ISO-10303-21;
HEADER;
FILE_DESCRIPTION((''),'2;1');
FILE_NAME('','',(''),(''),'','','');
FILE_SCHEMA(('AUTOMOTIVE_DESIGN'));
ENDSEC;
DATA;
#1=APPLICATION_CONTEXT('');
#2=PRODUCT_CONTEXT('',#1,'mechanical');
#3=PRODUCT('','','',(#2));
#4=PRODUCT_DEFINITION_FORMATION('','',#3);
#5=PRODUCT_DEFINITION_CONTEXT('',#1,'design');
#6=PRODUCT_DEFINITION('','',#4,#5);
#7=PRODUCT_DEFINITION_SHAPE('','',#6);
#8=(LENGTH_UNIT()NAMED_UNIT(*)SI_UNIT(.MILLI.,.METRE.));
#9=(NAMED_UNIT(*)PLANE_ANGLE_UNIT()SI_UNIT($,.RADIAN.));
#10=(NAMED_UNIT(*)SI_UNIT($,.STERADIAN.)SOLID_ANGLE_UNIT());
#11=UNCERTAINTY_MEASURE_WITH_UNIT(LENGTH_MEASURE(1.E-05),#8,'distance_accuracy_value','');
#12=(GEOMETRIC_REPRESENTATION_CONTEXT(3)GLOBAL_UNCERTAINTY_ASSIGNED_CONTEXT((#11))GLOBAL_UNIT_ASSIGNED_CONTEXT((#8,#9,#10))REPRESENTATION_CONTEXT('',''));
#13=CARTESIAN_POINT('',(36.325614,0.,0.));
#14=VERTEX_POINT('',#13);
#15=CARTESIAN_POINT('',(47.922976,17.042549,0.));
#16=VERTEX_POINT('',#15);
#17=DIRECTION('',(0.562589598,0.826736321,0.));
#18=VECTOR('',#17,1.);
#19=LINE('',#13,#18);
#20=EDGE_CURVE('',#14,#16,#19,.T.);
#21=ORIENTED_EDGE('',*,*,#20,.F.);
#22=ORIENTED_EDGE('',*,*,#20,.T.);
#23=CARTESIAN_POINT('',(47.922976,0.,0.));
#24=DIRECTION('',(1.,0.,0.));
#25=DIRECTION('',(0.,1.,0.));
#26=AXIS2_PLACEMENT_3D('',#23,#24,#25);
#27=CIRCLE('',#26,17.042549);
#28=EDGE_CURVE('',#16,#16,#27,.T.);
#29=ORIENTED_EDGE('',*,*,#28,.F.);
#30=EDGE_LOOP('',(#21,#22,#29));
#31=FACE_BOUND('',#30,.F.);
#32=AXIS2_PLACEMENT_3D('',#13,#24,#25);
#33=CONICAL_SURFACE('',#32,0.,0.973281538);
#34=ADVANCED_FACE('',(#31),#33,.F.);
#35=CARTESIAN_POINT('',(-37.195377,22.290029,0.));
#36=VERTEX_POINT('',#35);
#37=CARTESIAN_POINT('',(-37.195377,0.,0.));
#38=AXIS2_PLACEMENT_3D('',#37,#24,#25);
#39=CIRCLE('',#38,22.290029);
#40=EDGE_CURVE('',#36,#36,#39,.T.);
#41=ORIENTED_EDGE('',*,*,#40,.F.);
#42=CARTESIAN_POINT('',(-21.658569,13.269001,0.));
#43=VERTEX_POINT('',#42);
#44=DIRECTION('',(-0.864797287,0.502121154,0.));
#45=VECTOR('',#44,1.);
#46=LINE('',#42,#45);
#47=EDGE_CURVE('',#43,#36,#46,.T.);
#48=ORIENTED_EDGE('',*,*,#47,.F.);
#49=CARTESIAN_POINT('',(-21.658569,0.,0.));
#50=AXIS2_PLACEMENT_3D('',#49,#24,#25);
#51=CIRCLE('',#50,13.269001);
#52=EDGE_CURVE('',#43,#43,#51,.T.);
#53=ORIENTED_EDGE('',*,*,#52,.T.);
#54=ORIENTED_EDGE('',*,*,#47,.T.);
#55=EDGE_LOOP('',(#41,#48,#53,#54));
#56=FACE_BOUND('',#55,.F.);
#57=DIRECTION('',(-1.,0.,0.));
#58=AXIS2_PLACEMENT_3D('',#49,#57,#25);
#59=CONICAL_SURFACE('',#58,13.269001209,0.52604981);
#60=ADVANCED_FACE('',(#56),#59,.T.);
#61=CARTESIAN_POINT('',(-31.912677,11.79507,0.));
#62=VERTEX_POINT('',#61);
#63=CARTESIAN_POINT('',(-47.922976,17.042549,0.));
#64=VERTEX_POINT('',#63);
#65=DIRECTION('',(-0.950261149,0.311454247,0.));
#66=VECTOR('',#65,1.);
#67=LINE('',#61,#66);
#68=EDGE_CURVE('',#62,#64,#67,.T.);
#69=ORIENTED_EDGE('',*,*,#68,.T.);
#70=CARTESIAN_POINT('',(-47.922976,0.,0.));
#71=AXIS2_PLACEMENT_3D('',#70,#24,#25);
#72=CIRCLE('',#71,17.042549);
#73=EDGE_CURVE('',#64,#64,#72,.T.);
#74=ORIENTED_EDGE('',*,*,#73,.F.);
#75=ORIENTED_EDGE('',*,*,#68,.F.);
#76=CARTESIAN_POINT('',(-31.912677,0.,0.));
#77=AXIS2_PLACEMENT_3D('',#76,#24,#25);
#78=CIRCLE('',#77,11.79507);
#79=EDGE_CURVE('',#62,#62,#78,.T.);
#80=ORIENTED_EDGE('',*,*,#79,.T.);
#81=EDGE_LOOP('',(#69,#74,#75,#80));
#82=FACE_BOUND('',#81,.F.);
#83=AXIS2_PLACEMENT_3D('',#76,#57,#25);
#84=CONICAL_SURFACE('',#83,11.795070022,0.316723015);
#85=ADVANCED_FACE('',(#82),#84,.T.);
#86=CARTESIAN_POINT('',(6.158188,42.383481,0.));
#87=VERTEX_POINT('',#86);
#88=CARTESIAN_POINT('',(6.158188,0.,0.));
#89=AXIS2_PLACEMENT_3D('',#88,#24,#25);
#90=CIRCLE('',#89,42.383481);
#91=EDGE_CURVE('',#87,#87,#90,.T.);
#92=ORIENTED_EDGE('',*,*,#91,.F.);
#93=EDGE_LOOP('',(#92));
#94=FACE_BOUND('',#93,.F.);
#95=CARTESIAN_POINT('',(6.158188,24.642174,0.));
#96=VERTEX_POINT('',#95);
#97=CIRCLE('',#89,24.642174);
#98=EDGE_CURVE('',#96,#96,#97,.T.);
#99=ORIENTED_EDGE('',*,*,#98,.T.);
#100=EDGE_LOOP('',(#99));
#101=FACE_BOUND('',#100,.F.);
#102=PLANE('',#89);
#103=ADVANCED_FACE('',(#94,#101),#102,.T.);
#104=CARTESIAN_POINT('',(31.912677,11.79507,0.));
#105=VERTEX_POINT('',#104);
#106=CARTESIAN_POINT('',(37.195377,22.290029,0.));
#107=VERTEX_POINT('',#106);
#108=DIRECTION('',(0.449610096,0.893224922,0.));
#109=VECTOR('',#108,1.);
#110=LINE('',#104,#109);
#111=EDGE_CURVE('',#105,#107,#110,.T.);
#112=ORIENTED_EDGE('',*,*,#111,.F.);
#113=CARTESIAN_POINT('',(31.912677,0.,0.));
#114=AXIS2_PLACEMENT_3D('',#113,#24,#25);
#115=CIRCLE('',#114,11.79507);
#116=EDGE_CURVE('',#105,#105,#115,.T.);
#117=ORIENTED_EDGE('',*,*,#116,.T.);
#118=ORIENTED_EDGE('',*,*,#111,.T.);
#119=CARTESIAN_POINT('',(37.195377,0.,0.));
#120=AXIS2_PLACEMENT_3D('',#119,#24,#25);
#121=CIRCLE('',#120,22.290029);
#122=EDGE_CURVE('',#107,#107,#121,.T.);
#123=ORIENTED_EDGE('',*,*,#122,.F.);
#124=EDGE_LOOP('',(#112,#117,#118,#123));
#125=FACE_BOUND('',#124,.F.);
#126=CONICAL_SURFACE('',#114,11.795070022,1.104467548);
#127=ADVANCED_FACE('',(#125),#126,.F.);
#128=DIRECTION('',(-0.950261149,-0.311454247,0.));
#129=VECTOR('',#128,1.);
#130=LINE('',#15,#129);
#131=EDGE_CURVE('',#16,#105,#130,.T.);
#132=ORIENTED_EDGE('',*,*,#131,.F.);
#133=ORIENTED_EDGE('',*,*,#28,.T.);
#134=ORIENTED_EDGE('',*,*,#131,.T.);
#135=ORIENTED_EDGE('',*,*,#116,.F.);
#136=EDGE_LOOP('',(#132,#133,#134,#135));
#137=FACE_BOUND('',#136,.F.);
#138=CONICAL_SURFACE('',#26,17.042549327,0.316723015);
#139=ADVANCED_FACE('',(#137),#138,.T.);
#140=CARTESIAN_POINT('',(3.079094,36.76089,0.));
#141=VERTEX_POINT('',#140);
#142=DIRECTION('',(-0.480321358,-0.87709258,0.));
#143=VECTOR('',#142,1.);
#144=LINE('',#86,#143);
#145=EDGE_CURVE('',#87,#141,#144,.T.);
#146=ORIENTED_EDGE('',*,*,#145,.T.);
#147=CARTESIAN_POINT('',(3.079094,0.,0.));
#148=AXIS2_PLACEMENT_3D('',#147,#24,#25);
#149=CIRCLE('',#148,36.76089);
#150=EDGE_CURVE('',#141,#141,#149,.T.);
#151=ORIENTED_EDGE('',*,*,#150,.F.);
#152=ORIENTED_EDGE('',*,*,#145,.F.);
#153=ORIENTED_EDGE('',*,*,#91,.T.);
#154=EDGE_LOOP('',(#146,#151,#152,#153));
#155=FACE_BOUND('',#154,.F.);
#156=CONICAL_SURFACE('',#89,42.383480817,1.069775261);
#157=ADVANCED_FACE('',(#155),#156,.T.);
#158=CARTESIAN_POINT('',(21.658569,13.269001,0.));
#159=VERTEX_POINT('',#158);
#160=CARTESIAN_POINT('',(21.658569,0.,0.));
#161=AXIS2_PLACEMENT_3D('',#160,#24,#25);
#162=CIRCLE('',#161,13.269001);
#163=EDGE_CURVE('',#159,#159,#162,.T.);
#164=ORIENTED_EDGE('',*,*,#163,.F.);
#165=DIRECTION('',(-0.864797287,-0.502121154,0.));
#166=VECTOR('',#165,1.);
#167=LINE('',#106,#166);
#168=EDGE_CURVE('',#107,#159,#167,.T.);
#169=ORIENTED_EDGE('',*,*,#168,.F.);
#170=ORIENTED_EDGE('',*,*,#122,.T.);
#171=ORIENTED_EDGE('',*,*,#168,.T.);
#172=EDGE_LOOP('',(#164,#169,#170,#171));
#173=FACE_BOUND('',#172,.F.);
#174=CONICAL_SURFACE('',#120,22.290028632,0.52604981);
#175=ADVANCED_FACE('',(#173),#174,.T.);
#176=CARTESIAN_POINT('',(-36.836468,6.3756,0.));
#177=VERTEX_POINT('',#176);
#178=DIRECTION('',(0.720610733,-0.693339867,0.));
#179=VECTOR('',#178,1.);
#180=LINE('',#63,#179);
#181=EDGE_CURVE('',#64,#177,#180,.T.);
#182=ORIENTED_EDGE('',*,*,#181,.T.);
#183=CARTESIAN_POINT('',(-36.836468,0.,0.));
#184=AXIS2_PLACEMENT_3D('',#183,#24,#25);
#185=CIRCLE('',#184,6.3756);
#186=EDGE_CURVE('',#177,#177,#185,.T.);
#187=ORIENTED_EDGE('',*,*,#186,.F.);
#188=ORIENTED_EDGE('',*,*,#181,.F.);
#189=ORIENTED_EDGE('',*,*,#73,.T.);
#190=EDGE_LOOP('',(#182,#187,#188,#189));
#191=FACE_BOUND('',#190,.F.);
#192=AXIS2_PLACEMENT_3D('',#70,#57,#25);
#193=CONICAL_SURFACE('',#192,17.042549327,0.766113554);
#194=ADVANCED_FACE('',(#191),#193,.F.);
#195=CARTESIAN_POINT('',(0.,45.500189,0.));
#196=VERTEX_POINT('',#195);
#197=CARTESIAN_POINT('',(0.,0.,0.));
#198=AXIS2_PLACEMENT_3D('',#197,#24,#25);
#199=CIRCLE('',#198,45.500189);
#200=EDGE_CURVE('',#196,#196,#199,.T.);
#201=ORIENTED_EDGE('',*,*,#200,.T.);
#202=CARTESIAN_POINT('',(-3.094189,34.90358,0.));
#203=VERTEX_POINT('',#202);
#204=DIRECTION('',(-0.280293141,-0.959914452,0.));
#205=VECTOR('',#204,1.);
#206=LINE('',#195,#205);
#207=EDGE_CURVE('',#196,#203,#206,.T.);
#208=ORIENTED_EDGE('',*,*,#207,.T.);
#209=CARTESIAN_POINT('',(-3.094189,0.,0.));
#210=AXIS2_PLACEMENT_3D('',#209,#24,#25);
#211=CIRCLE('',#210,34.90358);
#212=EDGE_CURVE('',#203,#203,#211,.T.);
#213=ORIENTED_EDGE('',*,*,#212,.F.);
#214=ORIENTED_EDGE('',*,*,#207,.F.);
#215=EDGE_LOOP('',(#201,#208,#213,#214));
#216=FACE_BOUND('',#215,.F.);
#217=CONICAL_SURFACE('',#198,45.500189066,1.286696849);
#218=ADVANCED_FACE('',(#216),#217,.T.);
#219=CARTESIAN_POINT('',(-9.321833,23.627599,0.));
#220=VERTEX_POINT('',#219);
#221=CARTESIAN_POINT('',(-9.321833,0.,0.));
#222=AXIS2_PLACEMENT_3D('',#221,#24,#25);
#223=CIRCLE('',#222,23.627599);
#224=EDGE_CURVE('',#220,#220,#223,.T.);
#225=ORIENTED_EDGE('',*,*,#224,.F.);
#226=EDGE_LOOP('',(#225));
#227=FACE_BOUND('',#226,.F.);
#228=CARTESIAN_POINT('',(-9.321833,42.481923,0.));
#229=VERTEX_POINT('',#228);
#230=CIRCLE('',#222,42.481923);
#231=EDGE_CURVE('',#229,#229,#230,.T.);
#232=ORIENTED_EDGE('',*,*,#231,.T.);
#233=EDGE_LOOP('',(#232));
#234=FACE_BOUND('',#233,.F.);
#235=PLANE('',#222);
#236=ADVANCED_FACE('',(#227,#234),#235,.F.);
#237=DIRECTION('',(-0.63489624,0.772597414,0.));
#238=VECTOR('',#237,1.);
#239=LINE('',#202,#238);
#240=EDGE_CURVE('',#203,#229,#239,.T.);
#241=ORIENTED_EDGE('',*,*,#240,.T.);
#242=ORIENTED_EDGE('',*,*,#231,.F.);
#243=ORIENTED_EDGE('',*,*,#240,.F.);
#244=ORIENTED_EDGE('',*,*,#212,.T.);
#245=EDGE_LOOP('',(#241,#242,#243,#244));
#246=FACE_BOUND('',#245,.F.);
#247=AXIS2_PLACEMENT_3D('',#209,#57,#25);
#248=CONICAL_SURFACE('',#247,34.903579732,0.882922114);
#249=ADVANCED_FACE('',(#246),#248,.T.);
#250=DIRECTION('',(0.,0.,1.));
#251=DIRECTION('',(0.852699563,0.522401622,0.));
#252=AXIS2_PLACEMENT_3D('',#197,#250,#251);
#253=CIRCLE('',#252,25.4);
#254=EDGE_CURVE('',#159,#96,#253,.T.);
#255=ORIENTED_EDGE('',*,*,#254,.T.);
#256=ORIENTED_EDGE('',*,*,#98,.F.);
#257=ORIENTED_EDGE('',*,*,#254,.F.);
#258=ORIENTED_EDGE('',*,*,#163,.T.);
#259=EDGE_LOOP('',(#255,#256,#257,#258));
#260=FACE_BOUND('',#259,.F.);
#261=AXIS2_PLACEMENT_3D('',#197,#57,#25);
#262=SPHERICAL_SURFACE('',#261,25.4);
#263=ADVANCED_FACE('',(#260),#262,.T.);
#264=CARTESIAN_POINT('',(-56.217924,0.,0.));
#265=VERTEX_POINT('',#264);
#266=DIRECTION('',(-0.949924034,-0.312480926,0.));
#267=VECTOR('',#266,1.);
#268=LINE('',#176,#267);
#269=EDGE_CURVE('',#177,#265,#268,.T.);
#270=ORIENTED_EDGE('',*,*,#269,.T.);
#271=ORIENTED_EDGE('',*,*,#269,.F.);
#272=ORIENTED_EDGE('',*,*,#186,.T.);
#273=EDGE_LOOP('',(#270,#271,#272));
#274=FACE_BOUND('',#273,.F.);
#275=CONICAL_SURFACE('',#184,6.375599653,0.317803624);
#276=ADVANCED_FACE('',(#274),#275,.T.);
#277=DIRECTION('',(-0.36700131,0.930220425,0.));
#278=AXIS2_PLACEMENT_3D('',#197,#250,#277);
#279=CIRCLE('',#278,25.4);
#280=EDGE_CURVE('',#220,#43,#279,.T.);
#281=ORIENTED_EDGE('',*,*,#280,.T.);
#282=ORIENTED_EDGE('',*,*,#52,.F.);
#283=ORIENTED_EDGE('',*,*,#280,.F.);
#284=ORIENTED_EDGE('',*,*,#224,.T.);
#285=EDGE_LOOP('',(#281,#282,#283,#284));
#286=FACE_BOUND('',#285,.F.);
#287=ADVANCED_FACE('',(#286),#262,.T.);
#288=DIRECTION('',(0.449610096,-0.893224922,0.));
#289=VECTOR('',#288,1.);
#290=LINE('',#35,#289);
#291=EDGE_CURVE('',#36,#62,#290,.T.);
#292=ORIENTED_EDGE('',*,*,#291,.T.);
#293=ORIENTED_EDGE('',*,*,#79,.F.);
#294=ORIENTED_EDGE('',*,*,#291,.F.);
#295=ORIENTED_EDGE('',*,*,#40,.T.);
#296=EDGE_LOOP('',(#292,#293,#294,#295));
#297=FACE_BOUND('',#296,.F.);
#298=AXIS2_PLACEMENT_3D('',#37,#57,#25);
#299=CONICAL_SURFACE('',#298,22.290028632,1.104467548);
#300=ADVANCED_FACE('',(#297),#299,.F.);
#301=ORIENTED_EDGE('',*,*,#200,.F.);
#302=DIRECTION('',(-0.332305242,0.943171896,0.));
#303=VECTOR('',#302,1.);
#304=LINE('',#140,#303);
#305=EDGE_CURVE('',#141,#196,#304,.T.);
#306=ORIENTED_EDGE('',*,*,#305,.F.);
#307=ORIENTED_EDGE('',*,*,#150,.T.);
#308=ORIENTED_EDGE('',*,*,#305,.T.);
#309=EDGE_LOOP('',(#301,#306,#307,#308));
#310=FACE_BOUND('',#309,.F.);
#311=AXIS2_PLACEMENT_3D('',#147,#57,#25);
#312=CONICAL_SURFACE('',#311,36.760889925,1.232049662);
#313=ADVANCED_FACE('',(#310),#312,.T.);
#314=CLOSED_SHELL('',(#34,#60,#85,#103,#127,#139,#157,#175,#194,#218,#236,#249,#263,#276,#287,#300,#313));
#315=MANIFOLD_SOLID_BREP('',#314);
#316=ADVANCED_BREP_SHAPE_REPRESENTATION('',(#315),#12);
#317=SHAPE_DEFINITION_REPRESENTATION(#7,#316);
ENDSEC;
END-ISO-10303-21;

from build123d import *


# Not quite as in the source:
# - a feature names something its author has since deleted; it is built from what else it names


with BuildPart() as f1:
    # F0 (on Top) → F1 (revolve)
    with BuildSketch(Plane.XY):
        with BuildLine():
            Line((37.1953770518, 22.2900286317), (21.6585689027, 13.2690012092))
            ThreePointArc((21.6585689027, 13.2690012092), (15.0259859449, 20.4787633021), (6.1581879854, 24.6421736204))
            Line((6.1581879854, 24.6421736204), (6.1581879854, 42.3834808171))
            Line((6.1581879854, 42.3834808171), (3.0790939927, 36.7608899251))
            Line((3.0790939927, 36.7608899251), (0, 45.5001890659))
            Line((0, 45.5001890659), (-3.0941891787, 34.9035797321))
            Line((-3.0941891787, 34.9035797321), (-9.3218332717, 42.48192312))
            Line((-9.3218332717, 42.48192312), (-9.3218332717, 23.6275987873))
            ThreePointArc((-9.3218332717, 23.6275987873), (-16.3331401043, 19.4522115538), (-21.6585689027, 13.2690012092))
            Line((-21.6585689027, 13.2690012092), (-37.1953770518, 22.2900286317))
            Line((-37.1953770518, 22.2900286317), (-31.91267699, 11.7950700223))
            Line((-31.91267699, 11.7950700223), (-47.922976315, 17.042549327))
            Line((-47.922976315, 17.042549327), (-36.8364676833, 6.3755996525))
            Line((-36.8364676833, 6.3755996525), (-56.2179237604, 0))
            Line((-56.2179237604, 0), (36.3256136068, 0))
            Line((36.3256136068, 0), (47.922976315, 17.042549327))
            Line((47.922976315, 17.042549327), (31.91267699, 11.7950700223))
            Line((31.91267699, 11.7950700223), (37.1953770518, 22.2900286317))
        make_face()
    revolve(axis=Axis((-9.9461550768, 0, 0), (1, 0, 0)))


solid = f1.part
